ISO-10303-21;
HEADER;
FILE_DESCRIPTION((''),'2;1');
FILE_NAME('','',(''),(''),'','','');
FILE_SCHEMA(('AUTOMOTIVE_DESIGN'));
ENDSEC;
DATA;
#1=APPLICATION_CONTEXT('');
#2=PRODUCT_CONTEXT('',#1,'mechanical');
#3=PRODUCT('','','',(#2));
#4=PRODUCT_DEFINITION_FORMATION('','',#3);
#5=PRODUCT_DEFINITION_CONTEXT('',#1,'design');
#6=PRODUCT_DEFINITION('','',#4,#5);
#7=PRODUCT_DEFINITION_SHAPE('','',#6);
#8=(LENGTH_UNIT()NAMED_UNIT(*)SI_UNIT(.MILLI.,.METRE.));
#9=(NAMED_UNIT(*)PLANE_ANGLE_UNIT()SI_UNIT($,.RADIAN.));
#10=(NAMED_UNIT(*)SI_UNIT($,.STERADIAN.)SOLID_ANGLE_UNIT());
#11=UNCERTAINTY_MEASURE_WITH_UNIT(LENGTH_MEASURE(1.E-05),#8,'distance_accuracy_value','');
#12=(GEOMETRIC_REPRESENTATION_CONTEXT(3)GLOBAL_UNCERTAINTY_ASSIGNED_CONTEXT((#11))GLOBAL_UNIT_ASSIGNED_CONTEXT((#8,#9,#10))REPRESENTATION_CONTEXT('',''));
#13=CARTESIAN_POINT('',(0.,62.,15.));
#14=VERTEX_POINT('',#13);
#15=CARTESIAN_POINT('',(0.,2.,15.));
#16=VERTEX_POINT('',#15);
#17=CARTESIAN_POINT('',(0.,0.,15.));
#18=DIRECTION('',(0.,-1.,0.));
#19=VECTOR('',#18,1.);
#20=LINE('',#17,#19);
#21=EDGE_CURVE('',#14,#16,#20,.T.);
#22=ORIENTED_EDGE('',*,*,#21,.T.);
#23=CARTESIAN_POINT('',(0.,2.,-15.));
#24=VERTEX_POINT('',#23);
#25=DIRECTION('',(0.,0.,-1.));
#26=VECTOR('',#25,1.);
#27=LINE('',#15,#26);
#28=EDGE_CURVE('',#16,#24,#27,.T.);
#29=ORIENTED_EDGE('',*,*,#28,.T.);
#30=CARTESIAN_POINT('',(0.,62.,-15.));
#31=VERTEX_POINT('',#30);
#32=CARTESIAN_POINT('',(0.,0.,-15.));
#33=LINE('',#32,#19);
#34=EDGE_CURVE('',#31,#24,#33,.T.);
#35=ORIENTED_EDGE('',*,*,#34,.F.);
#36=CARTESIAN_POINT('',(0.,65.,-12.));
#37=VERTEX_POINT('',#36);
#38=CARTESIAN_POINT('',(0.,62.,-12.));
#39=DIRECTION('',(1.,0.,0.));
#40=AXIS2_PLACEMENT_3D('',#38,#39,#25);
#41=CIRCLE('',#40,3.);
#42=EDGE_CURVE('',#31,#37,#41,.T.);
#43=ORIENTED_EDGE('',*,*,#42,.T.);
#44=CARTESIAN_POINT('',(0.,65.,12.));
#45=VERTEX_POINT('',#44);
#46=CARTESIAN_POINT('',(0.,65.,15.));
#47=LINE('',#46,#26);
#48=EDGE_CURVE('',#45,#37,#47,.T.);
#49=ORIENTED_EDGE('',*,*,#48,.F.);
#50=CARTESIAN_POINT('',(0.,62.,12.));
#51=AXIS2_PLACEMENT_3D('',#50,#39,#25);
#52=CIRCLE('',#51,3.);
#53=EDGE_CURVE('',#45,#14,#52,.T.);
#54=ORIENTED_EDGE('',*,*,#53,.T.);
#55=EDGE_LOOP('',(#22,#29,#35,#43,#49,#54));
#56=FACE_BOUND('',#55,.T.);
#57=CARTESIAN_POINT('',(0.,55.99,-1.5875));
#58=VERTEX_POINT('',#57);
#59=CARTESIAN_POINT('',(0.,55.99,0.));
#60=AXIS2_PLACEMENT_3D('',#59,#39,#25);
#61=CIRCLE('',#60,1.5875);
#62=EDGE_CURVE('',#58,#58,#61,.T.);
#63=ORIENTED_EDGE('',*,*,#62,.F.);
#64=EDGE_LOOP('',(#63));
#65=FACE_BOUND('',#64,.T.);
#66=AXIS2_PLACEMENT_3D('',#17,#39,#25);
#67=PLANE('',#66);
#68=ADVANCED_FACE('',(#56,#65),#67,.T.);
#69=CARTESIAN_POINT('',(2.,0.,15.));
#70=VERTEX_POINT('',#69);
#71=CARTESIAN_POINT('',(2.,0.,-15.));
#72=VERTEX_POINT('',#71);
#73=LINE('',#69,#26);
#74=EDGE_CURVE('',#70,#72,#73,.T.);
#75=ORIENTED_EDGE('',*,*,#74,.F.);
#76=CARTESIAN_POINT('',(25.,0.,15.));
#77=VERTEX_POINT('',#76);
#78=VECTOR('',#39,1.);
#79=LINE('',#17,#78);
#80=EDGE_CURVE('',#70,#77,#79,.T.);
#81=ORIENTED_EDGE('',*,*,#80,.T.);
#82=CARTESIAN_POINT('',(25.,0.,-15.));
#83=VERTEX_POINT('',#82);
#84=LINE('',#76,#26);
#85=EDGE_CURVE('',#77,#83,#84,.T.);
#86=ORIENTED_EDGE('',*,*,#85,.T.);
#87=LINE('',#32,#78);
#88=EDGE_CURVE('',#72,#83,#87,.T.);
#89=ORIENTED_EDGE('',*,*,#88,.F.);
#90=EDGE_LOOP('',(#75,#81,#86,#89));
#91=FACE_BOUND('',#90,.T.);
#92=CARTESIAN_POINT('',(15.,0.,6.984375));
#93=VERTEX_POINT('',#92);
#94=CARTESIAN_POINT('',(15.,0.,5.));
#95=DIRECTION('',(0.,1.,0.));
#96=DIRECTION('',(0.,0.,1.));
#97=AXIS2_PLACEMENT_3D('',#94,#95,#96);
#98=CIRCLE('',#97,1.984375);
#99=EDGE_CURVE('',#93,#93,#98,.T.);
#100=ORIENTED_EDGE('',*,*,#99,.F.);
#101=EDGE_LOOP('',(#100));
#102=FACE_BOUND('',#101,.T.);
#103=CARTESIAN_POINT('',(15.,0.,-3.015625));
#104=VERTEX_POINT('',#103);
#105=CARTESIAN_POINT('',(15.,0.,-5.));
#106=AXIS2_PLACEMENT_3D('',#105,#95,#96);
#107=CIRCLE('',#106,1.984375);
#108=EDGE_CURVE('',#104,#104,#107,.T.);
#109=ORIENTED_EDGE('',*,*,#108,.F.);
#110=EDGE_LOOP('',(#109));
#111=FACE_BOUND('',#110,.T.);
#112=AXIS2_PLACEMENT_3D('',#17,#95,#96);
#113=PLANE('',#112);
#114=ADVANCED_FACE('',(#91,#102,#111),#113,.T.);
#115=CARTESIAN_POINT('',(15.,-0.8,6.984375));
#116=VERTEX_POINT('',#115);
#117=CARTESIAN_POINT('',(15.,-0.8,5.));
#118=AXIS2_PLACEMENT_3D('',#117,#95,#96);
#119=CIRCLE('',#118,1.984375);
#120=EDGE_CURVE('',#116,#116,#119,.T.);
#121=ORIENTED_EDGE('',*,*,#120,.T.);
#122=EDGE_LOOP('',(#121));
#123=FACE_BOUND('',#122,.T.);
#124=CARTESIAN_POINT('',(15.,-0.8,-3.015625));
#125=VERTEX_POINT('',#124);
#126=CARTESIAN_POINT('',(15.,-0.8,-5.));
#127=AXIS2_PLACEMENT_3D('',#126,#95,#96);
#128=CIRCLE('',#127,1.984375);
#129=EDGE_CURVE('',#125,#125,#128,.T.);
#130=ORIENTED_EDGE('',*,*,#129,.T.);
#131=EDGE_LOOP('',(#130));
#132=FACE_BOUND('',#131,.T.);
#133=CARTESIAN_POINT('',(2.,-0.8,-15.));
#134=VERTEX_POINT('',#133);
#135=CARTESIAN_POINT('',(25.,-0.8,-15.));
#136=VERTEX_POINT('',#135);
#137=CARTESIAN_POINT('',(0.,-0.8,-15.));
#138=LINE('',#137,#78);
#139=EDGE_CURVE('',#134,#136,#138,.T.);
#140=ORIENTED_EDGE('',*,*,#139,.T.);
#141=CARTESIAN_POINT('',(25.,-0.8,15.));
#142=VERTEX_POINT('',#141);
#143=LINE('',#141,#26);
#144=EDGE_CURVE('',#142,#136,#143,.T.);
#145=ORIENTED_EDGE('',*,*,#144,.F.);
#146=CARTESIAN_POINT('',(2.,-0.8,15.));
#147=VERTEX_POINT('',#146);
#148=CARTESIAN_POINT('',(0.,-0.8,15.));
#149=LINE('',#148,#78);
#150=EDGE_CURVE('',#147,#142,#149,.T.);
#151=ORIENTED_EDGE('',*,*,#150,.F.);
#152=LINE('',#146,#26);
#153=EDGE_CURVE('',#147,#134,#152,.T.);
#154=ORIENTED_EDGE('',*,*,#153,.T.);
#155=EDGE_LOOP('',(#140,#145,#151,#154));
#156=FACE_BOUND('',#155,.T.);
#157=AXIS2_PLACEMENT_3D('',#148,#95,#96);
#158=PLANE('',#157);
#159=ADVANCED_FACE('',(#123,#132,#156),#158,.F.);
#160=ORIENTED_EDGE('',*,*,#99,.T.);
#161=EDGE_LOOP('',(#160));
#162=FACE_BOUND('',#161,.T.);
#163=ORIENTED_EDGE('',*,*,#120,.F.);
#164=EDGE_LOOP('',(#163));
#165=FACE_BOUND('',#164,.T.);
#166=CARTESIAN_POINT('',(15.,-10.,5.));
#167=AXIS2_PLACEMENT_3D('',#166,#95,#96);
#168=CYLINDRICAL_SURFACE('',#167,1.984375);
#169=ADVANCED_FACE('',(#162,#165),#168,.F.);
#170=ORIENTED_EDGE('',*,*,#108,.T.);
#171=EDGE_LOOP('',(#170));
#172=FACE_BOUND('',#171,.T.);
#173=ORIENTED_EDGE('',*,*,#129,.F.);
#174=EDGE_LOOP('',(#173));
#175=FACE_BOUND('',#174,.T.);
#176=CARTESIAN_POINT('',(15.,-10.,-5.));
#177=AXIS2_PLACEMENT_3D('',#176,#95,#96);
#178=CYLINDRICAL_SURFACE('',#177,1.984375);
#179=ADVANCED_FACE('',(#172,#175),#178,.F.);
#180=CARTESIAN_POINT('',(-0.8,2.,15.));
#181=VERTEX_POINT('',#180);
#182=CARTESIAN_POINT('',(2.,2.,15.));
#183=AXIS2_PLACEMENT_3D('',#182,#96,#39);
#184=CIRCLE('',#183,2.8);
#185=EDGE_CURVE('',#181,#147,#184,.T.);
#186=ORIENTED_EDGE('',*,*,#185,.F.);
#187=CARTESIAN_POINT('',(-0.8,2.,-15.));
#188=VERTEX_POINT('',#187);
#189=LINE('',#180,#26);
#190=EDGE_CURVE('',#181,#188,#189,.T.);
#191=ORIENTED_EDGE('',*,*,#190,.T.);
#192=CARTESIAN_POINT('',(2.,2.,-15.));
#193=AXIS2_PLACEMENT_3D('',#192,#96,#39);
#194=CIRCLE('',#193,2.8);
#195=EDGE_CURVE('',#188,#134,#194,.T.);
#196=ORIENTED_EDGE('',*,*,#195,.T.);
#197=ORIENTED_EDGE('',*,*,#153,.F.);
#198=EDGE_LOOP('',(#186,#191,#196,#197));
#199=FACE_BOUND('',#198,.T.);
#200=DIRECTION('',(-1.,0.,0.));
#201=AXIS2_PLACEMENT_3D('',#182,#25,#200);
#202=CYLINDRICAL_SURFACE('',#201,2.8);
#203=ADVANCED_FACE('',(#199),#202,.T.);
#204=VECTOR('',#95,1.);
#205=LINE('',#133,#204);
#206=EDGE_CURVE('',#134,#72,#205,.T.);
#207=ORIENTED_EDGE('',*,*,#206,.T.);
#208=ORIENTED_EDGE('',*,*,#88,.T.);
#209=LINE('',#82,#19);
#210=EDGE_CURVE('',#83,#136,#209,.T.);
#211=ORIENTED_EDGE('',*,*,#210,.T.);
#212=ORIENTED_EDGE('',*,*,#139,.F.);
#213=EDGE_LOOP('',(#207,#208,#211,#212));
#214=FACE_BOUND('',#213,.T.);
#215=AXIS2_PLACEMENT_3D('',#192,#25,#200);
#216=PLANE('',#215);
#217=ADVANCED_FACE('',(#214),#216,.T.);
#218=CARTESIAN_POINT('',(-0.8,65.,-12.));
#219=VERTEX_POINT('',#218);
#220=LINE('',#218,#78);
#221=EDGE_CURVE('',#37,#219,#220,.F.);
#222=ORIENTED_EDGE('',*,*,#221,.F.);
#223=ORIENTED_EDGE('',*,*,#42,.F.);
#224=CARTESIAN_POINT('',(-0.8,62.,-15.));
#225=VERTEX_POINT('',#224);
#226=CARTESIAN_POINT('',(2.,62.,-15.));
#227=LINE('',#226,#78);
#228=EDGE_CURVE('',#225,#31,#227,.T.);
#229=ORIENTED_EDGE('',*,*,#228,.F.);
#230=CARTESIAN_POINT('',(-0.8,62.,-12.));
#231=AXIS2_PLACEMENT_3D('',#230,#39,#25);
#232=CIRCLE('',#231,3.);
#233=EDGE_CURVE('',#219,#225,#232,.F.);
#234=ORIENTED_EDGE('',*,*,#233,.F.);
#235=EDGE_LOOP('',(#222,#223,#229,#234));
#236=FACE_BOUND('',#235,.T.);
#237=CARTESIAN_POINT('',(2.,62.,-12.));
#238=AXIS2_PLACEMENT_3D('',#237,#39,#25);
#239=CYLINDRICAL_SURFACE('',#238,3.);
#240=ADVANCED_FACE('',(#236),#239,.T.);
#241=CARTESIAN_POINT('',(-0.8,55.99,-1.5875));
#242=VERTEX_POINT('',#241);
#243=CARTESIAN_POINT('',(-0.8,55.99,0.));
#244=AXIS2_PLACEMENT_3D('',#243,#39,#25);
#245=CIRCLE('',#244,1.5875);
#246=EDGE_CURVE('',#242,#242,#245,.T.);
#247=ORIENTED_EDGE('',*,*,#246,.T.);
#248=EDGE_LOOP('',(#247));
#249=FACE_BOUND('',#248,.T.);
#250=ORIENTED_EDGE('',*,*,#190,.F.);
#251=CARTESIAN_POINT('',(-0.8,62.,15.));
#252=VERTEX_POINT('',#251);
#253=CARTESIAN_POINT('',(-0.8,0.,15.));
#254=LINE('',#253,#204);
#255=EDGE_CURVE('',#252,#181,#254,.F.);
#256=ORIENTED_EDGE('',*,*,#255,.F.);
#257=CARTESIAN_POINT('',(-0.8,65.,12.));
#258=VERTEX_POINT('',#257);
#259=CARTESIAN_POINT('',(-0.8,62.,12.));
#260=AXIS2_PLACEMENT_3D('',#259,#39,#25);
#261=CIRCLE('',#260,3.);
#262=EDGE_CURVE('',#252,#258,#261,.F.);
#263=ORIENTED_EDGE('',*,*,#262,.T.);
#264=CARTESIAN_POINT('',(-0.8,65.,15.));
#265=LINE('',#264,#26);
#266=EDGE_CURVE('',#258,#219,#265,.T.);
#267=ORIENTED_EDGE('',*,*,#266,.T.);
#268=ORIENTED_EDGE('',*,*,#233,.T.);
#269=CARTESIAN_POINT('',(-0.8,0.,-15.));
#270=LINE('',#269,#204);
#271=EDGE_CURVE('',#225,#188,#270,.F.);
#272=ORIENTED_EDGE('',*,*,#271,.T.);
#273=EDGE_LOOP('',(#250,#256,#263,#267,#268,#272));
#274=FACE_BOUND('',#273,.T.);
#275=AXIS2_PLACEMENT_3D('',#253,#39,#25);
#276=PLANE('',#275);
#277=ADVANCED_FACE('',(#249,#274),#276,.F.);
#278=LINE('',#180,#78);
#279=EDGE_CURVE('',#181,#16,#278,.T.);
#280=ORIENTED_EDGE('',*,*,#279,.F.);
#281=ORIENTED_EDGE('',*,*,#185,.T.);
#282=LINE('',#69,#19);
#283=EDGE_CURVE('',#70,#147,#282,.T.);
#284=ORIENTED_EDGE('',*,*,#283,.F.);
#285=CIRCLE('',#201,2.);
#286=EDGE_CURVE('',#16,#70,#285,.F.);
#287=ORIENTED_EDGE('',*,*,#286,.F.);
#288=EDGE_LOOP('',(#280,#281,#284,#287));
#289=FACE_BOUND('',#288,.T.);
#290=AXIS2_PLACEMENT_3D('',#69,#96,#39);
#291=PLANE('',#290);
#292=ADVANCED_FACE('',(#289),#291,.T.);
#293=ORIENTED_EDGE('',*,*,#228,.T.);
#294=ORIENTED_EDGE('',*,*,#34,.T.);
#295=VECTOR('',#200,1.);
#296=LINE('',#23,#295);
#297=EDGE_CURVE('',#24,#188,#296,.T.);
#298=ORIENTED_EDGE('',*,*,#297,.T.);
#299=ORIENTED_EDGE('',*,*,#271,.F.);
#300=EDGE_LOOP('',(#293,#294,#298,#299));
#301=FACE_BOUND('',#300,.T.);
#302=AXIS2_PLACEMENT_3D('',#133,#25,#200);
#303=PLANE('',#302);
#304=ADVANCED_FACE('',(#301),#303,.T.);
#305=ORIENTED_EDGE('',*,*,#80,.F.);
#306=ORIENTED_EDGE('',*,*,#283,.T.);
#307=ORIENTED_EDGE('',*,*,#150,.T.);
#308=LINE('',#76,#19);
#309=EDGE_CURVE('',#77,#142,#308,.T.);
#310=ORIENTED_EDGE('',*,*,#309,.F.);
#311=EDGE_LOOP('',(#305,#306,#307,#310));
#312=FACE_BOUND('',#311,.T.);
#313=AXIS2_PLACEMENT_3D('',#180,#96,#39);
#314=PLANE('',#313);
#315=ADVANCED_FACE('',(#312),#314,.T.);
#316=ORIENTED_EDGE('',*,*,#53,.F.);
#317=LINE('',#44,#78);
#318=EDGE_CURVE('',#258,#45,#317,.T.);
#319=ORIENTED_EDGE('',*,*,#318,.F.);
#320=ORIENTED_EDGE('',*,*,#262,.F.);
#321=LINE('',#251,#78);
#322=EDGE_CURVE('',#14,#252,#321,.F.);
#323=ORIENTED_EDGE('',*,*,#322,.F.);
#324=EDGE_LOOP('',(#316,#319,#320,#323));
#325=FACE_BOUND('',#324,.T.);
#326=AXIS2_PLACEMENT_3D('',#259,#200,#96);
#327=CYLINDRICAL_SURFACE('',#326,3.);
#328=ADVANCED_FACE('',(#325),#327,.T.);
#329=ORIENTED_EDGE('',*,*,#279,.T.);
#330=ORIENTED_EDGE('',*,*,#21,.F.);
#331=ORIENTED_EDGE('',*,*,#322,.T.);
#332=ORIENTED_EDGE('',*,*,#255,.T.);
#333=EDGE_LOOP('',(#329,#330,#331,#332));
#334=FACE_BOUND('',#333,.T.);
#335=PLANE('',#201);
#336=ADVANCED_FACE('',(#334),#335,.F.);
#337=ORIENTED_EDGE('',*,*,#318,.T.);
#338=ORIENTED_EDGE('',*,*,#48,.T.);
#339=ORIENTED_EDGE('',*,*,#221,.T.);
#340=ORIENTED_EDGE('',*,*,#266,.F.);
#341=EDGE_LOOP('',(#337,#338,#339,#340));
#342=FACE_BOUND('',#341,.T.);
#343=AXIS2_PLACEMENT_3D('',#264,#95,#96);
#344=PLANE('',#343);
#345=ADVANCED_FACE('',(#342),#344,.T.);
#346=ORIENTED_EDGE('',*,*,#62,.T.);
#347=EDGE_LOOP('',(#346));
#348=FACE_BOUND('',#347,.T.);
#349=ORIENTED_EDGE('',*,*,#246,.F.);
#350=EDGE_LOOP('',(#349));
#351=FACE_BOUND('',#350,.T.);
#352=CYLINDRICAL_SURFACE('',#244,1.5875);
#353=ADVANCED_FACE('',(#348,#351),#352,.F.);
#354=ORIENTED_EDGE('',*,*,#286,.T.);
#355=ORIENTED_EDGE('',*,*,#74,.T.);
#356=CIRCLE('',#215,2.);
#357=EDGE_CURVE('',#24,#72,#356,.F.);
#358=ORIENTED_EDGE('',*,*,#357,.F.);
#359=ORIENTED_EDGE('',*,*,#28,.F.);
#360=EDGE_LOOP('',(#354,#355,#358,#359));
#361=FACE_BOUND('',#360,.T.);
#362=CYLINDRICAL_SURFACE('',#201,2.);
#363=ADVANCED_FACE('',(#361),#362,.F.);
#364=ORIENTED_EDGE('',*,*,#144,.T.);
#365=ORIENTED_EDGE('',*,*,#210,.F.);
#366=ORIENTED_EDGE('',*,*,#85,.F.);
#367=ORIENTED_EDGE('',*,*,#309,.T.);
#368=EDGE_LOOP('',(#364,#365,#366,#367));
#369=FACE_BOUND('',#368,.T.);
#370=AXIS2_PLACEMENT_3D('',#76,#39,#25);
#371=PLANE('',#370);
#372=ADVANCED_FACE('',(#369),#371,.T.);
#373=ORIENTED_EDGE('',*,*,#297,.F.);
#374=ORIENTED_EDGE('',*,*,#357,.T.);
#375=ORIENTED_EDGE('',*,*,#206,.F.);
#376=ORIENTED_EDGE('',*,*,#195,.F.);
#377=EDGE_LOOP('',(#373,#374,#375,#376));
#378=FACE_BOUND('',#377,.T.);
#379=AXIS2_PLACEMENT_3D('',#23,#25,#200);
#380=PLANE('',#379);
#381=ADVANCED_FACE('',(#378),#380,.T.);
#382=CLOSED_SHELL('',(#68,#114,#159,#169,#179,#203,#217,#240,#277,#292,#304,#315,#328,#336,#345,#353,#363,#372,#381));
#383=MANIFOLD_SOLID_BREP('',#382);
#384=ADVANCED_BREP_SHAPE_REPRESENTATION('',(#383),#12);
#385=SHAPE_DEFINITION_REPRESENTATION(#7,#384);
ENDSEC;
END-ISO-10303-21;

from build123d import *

# Parameters (mm, degrees)
BASE_FLANGE1_DEPTH      = 15
BASE_FLANGE1_DEPTH_BACK = 15
SKETCH2_R               = 1.5875
CUT_EXTRUDE1_DEPTH      = 72.239034244
SKETCH3_R               = 1.984375
CUT_EXTRUDE2_DEPTH      = 10
FILLET1_R               = 3


# Sheet-metal steps are written as plain solids
with BuildPart() as part:
    # Sketch1 → Base-Flange1 (new, two sides: drawn at the far end of the back side and taken through both)
    with BuildSketch(Plane.XY.offset(-BASE_FLANGE1_DEPTH_BACK)):
        with BuildLine():
            Line((25, 0), (2, 0))
            ThreePointArc((2, 0), (0.585786438, 0.585786438), (0, 2))
            Line((0, 2), (0, 65))
            Line((0, 65), (-0.8, 65))
            Line((-0.8, 65), (-0.8, 2))
            ThreePointArc((-0.8, 2), (0.020101013, 0.020101013), (2, -0.8))
            Line((2, -0.8), (25, -0.8))
            Line((25, -0.8), (25, 0))
        make_face()
    extrude(amount=BASE_FLANGE1_DEPTH + BASE_FLANGE1_DEPTH_BACK)

    # Sketch2 → Cut-Extrude1 (cut, through all)
    with BuildSketch(Plane(origin=(0, 0, 0), x_dir=(0, 0, -1), z_dir=(1, 0, 0))):
        with Locations((0, 55.99)):
            Circle(SKETCH2_R)
    extrude(amount=-CUT_EXTRUDE1_DEPTH, mode=Mode.SUBTRACT)

    # Sketch3 → Cut-Extrude2 (cut)
    with BuildSketch(Plane(origin=(0, 0, 0), x_dir=(1, 0, 0), z_dir=(0, 1, 0))):
        with Locations(Location((15, -5, 0), (0, 0, 270))):
            Circle(SKETCH3_R)
        with Locations(Location((15, 5, 0), (0, 0, 270))):
            Circle(SKETCH3_R)
    extrude(amount=-CUT_EXTRUDE2_DEPTH, mode=Mode.SUBTRACT)

    # Fillet1
    fillet1_edges = [part.edges().sort_by_distance(p)[0] for p in [
        (-0.4, 65, 15),
        (-0.4, 65, -15),
    ]]
    fillet(fillet1_edges, radius=FILLET1_R)


solid = part.part
